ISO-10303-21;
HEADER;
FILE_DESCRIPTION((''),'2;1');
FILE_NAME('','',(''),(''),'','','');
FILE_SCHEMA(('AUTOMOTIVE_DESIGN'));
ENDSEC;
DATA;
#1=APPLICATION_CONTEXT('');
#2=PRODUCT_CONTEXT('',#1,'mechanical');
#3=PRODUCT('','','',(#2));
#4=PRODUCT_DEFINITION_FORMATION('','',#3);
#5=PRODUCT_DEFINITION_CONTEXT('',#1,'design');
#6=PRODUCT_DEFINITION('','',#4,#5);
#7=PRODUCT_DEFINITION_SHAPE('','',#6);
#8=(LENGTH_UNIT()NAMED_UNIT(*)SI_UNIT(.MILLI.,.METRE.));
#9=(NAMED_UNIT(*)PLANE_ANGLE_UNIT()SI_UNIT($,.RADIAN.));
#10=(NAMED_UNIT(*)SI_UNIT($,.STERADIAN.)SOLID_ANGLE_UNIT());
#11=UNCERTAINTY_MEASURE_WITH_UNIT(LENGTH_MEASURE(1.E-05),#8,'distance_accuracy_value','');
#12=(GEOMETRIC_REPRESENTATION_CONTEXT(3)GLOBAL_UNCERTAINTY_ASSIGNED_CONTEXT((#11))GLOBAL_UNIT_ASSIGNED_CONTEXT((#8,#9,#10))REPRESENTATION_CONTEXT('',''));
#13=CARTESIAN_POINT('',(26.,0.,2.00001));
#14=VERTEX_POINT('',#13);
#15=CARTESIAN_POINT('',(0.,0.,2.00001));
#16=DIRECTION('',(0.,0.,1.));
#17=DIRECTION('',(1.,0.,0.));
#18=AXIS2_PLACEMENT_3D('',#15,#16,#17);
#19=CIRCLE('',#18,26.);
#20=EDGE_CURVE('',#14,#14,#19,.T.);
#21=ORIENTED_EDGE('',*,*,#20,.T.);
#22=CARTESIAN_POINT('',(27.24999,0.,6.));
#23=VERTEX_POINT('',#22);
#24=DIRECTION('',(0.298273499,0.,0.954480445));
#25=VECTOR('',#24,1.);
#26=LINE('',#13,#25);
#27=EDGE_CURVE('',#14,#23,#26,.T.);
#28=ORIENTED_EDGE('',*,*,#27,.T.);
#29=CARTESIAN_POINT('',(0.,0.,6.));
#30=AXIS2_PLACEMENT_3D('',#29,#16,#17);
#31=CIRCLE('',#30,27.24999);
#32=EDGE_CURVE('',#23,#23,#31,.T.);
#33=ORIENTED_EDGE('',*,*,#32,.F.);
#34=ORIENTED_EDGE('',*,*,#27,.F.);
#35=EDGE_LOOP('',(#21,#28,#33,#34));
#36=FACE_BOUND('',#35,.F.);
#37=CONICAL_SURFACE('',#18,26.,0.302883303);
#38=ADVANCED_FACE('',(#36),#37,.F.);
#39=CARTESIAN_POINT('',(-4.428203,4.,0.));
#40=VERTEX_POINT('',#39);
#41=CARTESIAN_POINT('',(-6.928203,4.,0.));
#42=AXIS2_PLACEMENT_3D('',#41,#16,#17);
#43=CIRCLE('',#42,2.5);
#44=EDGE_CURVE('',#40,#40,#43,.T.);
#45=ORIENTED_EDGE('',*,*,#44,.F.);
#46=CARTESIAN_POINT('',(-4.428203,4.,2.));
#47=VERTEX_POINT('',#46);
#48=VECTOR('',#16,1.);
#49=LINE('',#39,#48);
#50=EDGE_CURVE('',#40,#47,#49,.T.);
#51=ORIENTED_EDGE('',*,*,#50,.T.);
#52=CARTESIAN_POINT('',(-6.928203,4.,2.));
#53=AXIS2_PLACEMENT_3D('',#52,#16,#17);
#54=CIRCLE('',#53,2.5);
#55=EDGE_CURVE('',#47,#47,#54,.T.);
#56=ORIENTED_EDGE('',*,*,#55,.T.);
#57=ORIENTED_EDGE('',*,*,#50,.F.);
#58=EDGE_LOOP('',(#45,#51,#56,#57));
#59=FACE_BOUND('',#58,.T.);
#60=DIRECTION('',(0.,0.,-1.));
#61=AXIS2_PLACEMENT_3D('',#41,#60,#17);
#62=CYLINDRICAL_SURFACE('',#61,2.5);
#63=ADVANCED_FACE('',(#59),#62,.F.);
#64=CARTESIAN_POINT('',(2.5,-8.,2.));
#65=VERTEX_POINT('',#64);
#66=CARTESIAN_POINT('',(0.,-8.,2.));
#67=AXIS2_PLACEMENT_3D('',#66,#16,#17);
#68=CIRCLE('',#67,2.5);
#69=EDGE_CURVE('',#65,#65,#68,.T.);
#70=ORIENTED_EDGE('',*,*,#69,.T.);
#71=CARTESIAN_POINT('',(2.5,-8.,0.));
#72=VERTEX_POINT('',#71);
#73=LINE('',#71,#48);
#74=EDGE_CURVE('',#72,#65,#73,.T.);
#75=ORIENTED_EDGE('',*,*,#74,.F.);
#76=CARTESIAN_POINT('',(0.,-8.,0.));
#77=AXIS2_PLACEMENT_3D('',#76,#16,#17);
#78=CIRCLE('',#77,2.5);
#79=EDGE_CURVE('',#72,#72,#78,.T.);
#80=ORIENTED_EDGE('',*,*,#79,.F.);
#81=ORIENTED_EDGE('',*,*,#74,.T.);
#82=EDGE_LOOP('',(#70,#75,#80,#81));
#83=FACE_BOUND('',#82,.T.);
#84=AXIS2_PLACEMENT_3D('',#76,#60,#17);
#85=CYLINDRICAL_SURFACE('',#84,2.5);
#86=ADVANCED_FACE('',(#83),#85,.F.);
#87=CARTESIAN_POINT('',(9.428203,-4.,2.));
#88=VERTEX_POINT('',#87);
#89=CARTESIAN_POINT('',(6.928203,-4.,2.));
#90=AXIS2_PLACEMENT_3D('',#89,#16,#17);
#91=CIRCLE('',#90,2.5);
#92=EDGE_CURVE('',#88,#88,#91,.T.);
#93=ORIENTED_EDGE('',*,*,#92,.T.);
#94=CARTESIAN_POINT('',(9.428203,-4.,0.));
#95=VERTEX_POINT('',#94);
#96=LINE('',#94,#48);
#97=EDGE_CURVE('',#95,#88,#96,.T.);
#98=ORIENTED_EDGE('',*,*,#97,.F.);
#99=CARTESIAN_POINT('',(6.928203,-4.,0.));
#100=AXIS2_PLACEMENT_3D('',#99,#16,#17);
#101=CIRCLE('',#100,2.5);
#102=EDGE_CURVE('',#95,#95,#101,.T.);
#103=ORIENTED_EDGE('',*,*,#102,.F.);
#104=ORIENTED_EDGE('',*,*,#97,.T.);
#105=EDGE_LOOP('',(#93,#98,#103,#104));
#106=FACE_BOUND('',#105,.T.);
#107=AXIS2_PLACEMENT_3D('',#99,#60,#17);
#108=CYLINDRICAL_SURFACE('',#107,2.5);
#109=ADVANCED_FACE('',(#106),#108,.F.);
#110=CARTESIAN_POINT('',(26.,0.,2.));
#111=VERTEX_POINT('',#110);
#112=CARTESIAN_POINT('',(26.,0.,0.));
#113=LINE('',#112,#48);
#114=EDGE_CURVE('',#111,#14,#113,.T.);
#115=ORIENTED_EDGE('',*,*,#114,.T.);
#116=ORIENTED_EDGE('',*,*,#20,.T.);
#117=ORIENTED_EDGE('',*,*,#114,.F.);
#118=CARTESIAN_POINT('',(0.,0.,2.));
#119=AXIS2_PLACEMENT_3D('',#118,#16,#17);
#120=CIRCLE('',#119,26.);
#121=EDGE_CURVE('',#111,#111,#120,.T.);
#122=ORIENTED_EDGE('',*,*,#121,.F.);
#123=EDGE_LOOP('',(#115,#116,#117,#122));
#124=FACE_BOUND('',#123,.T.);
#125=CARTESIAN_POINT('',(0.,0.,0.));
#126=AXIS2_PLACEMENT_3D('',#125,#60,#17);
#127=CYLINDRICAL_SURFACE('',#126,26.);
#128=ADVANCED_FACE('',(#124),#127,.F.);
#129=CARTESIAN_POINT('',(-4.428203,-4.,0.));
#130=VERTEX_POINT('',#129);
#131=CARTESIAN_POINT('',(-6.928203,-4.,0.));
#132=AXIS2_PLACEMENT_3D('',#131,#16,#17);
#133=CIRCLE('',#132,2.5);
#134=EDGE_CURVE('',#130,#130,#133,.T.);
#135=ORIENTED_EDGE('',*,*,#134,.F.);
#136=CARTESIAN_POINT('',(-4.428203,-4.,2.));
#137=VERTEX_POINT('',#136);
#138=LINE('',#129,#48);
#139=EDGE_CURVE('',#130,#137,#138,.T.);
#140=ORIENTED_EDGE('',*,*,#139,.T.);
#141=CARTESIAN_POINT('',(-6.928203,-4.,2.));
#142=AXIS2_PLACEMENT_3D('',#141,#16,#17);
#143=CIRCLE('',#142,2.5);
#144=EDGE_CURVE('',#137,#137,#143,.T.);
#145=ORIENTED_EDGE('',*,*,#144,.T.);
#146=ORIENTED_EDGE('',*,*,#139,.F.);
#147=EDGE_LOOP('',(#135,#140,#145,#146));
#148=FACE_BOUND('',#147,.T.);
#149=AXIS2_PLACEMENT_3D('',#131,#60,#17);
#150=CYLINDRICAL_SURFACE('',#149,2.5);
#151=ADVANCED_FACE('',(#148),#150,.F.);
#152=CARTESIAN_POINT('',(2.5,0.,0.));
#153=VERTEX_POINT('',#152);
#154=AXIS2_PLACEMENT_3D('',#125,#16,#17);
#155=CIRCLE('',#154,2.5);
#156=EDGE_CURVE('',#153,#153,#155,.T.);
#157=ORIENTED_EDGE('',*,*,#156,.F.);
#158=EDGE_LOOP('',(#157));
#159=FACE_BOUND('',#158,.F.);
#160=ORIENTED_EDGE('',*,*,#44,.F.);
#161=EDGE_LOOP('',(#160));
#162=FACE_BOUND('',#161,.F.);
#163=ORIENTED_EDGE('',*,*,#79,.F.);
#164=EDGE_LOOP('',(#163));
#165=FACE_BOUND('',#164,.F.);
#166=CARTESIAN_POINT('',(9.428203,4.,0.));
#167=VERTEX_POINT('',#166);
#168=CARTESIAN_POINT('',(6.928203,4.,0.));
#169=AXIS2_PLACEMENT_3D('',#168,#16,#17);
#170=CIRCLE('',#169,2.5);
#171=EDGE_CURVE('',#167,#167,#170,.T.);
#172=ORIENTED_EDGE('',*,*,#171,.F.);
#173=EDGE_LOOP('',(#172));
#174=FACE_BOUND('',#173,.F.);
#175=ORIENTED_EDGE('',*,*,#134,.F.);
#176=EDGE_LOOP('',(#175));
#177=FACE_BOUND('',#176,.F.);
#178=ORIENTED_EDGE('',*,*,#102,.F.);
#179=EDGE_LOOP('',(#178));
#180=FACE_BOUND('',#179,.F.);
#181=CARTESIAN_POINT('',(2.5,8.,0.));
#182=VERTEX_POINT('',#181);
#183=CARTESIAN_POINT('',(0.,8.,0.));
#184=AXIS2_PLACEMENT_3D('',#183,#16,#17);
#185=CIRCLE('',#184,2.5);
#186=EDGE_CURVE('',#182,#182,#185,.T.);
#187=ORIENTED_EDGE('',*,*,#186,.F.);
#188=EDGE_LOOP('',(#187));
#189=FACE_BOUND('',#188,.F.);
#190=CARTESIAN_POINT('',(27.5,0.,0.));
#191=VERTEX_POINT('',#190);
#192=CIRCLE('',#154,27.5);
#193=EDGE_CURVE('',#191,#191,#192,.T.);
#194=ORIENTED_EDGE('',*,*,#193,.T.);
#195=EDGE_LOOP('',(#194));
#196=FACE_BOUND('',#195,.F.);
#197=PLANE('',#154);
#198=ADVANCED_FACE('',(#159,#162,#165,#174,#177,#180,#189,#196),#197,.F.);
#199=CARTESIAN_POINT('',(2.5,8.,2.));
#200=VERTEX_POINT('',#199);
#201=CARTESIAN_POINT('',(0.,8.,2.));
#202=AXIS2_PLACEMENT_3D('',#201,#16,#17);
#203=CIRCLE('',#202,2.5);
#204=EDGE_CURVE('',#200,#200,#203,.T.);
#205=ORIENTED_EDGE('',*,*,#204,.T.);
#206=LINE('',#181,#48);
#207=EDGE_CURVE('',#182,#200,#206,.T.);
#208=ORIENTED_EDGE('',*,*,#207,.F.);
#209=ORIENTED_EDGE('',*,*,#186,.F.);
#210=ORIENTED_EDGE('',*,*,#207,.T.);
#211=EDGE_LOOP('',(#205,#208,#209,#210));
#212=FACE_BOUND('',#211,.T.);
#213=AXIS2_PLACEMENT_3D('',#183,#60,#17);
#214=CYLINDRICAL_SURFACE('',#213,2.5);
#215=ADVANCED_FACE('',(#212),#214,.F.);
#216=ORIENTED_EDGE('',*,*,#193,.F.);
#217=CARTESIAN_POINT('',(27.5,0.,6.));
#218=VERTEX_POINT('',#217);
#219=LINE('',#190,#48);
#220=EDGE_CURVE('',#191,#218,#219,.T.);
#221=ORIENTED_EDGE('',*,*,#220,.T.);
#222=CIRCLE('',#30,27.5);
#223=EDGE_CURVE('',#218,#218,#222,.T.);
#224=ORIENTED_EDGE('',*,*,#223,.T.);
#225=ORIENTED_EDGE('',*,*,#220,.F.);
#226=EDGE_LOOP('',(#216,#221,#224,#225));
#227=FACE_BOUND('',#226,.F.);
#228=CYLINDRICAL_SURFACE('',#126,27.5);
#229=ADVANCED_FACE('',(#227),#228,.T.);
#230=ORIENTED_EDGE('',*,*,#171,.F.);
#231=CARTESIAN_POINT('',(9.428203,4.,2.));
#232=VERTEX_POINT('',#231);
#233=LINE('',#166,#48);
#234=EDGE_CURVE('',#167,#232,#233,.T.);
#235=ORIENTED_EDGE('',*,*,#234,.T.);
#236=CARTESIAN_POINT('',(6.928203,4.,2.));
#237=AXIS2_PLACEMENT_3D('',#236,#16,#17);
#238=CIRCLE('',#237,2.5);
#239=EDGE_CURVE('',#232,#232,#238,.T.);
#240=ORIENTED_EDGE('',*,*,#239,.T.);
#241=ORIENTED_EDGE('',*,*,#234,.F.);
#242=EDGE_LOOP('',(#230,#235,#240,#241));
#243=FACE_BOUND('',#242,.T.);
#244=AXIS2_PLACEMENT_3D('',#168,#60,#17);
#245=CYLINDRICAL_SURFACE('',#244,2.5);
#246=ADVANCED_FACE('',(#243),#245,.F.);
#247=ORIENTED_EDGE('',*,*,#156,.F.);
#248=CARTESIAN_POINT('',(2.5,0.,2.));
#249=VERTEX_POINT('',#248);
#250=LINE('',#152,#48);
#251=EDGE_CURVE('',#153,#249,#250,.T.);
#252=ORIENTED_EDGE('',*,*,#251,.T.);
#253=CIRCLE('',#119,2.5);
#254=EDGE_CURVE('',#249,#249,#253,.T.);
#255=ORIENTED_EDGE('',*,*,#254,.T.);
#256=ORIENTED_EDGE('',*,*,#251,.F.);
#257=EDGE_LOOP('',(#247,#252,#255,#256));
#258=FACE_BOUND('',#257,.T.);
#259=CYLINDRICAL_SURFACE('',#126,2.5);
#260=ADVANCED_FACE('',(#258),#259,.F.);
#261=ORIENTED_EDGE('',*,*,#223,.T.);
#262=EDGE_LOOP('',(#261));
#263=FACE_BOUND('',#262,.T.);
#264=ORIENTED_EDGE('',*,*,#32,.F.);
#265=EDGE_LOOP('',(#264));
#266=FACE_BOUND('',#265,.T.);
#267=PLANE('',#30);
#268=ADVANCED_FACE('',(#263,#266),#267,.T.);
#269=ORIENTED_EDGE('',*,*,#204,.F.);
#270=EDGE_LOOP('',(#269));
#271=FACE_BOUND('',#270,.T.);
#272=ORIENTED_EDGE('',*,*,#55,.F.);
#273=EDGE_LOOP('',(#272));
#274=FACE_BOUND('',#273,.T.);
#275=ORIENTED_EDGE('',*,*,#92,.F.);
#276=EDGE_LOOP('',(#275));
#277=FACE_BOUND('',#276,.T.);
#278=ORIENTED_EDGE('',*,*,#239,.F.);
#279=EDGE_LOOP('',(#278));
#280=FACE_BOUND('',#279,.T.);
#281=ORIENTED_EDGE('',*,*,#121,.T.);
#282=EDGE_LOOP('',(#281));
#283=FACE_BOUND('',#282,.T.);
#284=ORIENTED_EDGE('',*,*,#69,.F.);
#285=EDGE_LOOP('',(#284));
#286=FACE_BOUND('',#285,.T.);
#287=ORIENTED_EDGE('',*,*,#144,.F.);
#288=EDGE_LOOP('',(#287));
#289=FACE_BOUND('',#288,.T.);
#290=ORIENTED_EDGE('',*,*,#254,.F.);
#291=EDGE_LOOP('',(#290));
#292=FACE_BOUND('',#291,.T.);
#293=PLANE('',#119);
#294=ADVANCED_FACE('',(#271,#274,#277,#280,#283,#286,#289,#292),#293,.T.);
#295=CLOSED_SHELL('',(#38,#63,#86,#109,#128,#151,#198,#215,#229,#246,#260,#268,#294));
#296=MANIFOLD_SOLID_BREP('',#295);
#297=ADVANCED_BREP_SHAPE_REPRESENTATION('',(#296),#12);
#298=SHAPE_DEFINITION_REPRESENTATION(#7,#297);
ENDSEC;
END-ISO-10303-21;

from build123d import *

# Parameters (mm, degrees)
F0_R     = 26
F0_R_2   = 12
F0_R_3   = 2.5
F1_DEPTH = 2
F0_R_4   = 27.5
F2_DEPTH = 6
F3_SIZE2 = 1.24999
F3_SIZE  = 3.99999


# Not quite as in the source:
# - a fillet or chamfer is up to 0.001 mm smaller than in the source, because OpenCascade refuses the exact size


with BuildPart() as f1:
    # F0 (on Top) → F1 (new body)
    with BuildSketch(Plane.XY):
        Circle(F0_R)
        Circle(F0_R_2, mode=Mode.SUBTRACT)
        Circle(F0_R_2)
        with Locations((-6.9282032303, -4)):
            Circle(F0_R_3, mode=Mode.SUBTRACT)
        with Locations((0, -8)):
            Circle(F0_R_3, mode=Mode.SUBTRACT)
        with Locations((6.9282032303, -4)):
            Circle(F0_R_3, mode=Mode.SUBTRACT)
        with Locations((-6.9282032303, 4)):
            Circle(F0_R_3, mode=Mode.SUBTRACT)
        Circle(F0_R_3, mode=Mode.SUBTRACT)
        with Locations((6.9282032303, 4)):
            Circle(F0_R_3, mode=Mode.SUBTRACT)
        with Locations((0, 8)):
            Circle(F0_R_3, mode=Mode.SUBTRACT)
    extrude(amount=F1_DEPTH)

    # F0 (on Top) → F2 (join)
    with BuildSketch(Plane.XY):
        Circle(F0_R_4)
        Circle(F0_R, mode=Mode.SUBTRACT)
    extrude(amount=F2_DEPTH)

    # F3 (size 4 and 1.25 in the source; OpenCascade refuses exactly that, so slightly less here)
    f3_edges = [f1.edges().sort_by_distance(p)[0] for p in [
        (-26, 0, 6),
    ]]
    f3_side = f1.faces().sort_by_distance((-26, 0, 4))[0]
    chamfer(f3_edges, length=F3_SIZE, length2=F3_SIZE2, reference=f3_side)


solid = f1.part
